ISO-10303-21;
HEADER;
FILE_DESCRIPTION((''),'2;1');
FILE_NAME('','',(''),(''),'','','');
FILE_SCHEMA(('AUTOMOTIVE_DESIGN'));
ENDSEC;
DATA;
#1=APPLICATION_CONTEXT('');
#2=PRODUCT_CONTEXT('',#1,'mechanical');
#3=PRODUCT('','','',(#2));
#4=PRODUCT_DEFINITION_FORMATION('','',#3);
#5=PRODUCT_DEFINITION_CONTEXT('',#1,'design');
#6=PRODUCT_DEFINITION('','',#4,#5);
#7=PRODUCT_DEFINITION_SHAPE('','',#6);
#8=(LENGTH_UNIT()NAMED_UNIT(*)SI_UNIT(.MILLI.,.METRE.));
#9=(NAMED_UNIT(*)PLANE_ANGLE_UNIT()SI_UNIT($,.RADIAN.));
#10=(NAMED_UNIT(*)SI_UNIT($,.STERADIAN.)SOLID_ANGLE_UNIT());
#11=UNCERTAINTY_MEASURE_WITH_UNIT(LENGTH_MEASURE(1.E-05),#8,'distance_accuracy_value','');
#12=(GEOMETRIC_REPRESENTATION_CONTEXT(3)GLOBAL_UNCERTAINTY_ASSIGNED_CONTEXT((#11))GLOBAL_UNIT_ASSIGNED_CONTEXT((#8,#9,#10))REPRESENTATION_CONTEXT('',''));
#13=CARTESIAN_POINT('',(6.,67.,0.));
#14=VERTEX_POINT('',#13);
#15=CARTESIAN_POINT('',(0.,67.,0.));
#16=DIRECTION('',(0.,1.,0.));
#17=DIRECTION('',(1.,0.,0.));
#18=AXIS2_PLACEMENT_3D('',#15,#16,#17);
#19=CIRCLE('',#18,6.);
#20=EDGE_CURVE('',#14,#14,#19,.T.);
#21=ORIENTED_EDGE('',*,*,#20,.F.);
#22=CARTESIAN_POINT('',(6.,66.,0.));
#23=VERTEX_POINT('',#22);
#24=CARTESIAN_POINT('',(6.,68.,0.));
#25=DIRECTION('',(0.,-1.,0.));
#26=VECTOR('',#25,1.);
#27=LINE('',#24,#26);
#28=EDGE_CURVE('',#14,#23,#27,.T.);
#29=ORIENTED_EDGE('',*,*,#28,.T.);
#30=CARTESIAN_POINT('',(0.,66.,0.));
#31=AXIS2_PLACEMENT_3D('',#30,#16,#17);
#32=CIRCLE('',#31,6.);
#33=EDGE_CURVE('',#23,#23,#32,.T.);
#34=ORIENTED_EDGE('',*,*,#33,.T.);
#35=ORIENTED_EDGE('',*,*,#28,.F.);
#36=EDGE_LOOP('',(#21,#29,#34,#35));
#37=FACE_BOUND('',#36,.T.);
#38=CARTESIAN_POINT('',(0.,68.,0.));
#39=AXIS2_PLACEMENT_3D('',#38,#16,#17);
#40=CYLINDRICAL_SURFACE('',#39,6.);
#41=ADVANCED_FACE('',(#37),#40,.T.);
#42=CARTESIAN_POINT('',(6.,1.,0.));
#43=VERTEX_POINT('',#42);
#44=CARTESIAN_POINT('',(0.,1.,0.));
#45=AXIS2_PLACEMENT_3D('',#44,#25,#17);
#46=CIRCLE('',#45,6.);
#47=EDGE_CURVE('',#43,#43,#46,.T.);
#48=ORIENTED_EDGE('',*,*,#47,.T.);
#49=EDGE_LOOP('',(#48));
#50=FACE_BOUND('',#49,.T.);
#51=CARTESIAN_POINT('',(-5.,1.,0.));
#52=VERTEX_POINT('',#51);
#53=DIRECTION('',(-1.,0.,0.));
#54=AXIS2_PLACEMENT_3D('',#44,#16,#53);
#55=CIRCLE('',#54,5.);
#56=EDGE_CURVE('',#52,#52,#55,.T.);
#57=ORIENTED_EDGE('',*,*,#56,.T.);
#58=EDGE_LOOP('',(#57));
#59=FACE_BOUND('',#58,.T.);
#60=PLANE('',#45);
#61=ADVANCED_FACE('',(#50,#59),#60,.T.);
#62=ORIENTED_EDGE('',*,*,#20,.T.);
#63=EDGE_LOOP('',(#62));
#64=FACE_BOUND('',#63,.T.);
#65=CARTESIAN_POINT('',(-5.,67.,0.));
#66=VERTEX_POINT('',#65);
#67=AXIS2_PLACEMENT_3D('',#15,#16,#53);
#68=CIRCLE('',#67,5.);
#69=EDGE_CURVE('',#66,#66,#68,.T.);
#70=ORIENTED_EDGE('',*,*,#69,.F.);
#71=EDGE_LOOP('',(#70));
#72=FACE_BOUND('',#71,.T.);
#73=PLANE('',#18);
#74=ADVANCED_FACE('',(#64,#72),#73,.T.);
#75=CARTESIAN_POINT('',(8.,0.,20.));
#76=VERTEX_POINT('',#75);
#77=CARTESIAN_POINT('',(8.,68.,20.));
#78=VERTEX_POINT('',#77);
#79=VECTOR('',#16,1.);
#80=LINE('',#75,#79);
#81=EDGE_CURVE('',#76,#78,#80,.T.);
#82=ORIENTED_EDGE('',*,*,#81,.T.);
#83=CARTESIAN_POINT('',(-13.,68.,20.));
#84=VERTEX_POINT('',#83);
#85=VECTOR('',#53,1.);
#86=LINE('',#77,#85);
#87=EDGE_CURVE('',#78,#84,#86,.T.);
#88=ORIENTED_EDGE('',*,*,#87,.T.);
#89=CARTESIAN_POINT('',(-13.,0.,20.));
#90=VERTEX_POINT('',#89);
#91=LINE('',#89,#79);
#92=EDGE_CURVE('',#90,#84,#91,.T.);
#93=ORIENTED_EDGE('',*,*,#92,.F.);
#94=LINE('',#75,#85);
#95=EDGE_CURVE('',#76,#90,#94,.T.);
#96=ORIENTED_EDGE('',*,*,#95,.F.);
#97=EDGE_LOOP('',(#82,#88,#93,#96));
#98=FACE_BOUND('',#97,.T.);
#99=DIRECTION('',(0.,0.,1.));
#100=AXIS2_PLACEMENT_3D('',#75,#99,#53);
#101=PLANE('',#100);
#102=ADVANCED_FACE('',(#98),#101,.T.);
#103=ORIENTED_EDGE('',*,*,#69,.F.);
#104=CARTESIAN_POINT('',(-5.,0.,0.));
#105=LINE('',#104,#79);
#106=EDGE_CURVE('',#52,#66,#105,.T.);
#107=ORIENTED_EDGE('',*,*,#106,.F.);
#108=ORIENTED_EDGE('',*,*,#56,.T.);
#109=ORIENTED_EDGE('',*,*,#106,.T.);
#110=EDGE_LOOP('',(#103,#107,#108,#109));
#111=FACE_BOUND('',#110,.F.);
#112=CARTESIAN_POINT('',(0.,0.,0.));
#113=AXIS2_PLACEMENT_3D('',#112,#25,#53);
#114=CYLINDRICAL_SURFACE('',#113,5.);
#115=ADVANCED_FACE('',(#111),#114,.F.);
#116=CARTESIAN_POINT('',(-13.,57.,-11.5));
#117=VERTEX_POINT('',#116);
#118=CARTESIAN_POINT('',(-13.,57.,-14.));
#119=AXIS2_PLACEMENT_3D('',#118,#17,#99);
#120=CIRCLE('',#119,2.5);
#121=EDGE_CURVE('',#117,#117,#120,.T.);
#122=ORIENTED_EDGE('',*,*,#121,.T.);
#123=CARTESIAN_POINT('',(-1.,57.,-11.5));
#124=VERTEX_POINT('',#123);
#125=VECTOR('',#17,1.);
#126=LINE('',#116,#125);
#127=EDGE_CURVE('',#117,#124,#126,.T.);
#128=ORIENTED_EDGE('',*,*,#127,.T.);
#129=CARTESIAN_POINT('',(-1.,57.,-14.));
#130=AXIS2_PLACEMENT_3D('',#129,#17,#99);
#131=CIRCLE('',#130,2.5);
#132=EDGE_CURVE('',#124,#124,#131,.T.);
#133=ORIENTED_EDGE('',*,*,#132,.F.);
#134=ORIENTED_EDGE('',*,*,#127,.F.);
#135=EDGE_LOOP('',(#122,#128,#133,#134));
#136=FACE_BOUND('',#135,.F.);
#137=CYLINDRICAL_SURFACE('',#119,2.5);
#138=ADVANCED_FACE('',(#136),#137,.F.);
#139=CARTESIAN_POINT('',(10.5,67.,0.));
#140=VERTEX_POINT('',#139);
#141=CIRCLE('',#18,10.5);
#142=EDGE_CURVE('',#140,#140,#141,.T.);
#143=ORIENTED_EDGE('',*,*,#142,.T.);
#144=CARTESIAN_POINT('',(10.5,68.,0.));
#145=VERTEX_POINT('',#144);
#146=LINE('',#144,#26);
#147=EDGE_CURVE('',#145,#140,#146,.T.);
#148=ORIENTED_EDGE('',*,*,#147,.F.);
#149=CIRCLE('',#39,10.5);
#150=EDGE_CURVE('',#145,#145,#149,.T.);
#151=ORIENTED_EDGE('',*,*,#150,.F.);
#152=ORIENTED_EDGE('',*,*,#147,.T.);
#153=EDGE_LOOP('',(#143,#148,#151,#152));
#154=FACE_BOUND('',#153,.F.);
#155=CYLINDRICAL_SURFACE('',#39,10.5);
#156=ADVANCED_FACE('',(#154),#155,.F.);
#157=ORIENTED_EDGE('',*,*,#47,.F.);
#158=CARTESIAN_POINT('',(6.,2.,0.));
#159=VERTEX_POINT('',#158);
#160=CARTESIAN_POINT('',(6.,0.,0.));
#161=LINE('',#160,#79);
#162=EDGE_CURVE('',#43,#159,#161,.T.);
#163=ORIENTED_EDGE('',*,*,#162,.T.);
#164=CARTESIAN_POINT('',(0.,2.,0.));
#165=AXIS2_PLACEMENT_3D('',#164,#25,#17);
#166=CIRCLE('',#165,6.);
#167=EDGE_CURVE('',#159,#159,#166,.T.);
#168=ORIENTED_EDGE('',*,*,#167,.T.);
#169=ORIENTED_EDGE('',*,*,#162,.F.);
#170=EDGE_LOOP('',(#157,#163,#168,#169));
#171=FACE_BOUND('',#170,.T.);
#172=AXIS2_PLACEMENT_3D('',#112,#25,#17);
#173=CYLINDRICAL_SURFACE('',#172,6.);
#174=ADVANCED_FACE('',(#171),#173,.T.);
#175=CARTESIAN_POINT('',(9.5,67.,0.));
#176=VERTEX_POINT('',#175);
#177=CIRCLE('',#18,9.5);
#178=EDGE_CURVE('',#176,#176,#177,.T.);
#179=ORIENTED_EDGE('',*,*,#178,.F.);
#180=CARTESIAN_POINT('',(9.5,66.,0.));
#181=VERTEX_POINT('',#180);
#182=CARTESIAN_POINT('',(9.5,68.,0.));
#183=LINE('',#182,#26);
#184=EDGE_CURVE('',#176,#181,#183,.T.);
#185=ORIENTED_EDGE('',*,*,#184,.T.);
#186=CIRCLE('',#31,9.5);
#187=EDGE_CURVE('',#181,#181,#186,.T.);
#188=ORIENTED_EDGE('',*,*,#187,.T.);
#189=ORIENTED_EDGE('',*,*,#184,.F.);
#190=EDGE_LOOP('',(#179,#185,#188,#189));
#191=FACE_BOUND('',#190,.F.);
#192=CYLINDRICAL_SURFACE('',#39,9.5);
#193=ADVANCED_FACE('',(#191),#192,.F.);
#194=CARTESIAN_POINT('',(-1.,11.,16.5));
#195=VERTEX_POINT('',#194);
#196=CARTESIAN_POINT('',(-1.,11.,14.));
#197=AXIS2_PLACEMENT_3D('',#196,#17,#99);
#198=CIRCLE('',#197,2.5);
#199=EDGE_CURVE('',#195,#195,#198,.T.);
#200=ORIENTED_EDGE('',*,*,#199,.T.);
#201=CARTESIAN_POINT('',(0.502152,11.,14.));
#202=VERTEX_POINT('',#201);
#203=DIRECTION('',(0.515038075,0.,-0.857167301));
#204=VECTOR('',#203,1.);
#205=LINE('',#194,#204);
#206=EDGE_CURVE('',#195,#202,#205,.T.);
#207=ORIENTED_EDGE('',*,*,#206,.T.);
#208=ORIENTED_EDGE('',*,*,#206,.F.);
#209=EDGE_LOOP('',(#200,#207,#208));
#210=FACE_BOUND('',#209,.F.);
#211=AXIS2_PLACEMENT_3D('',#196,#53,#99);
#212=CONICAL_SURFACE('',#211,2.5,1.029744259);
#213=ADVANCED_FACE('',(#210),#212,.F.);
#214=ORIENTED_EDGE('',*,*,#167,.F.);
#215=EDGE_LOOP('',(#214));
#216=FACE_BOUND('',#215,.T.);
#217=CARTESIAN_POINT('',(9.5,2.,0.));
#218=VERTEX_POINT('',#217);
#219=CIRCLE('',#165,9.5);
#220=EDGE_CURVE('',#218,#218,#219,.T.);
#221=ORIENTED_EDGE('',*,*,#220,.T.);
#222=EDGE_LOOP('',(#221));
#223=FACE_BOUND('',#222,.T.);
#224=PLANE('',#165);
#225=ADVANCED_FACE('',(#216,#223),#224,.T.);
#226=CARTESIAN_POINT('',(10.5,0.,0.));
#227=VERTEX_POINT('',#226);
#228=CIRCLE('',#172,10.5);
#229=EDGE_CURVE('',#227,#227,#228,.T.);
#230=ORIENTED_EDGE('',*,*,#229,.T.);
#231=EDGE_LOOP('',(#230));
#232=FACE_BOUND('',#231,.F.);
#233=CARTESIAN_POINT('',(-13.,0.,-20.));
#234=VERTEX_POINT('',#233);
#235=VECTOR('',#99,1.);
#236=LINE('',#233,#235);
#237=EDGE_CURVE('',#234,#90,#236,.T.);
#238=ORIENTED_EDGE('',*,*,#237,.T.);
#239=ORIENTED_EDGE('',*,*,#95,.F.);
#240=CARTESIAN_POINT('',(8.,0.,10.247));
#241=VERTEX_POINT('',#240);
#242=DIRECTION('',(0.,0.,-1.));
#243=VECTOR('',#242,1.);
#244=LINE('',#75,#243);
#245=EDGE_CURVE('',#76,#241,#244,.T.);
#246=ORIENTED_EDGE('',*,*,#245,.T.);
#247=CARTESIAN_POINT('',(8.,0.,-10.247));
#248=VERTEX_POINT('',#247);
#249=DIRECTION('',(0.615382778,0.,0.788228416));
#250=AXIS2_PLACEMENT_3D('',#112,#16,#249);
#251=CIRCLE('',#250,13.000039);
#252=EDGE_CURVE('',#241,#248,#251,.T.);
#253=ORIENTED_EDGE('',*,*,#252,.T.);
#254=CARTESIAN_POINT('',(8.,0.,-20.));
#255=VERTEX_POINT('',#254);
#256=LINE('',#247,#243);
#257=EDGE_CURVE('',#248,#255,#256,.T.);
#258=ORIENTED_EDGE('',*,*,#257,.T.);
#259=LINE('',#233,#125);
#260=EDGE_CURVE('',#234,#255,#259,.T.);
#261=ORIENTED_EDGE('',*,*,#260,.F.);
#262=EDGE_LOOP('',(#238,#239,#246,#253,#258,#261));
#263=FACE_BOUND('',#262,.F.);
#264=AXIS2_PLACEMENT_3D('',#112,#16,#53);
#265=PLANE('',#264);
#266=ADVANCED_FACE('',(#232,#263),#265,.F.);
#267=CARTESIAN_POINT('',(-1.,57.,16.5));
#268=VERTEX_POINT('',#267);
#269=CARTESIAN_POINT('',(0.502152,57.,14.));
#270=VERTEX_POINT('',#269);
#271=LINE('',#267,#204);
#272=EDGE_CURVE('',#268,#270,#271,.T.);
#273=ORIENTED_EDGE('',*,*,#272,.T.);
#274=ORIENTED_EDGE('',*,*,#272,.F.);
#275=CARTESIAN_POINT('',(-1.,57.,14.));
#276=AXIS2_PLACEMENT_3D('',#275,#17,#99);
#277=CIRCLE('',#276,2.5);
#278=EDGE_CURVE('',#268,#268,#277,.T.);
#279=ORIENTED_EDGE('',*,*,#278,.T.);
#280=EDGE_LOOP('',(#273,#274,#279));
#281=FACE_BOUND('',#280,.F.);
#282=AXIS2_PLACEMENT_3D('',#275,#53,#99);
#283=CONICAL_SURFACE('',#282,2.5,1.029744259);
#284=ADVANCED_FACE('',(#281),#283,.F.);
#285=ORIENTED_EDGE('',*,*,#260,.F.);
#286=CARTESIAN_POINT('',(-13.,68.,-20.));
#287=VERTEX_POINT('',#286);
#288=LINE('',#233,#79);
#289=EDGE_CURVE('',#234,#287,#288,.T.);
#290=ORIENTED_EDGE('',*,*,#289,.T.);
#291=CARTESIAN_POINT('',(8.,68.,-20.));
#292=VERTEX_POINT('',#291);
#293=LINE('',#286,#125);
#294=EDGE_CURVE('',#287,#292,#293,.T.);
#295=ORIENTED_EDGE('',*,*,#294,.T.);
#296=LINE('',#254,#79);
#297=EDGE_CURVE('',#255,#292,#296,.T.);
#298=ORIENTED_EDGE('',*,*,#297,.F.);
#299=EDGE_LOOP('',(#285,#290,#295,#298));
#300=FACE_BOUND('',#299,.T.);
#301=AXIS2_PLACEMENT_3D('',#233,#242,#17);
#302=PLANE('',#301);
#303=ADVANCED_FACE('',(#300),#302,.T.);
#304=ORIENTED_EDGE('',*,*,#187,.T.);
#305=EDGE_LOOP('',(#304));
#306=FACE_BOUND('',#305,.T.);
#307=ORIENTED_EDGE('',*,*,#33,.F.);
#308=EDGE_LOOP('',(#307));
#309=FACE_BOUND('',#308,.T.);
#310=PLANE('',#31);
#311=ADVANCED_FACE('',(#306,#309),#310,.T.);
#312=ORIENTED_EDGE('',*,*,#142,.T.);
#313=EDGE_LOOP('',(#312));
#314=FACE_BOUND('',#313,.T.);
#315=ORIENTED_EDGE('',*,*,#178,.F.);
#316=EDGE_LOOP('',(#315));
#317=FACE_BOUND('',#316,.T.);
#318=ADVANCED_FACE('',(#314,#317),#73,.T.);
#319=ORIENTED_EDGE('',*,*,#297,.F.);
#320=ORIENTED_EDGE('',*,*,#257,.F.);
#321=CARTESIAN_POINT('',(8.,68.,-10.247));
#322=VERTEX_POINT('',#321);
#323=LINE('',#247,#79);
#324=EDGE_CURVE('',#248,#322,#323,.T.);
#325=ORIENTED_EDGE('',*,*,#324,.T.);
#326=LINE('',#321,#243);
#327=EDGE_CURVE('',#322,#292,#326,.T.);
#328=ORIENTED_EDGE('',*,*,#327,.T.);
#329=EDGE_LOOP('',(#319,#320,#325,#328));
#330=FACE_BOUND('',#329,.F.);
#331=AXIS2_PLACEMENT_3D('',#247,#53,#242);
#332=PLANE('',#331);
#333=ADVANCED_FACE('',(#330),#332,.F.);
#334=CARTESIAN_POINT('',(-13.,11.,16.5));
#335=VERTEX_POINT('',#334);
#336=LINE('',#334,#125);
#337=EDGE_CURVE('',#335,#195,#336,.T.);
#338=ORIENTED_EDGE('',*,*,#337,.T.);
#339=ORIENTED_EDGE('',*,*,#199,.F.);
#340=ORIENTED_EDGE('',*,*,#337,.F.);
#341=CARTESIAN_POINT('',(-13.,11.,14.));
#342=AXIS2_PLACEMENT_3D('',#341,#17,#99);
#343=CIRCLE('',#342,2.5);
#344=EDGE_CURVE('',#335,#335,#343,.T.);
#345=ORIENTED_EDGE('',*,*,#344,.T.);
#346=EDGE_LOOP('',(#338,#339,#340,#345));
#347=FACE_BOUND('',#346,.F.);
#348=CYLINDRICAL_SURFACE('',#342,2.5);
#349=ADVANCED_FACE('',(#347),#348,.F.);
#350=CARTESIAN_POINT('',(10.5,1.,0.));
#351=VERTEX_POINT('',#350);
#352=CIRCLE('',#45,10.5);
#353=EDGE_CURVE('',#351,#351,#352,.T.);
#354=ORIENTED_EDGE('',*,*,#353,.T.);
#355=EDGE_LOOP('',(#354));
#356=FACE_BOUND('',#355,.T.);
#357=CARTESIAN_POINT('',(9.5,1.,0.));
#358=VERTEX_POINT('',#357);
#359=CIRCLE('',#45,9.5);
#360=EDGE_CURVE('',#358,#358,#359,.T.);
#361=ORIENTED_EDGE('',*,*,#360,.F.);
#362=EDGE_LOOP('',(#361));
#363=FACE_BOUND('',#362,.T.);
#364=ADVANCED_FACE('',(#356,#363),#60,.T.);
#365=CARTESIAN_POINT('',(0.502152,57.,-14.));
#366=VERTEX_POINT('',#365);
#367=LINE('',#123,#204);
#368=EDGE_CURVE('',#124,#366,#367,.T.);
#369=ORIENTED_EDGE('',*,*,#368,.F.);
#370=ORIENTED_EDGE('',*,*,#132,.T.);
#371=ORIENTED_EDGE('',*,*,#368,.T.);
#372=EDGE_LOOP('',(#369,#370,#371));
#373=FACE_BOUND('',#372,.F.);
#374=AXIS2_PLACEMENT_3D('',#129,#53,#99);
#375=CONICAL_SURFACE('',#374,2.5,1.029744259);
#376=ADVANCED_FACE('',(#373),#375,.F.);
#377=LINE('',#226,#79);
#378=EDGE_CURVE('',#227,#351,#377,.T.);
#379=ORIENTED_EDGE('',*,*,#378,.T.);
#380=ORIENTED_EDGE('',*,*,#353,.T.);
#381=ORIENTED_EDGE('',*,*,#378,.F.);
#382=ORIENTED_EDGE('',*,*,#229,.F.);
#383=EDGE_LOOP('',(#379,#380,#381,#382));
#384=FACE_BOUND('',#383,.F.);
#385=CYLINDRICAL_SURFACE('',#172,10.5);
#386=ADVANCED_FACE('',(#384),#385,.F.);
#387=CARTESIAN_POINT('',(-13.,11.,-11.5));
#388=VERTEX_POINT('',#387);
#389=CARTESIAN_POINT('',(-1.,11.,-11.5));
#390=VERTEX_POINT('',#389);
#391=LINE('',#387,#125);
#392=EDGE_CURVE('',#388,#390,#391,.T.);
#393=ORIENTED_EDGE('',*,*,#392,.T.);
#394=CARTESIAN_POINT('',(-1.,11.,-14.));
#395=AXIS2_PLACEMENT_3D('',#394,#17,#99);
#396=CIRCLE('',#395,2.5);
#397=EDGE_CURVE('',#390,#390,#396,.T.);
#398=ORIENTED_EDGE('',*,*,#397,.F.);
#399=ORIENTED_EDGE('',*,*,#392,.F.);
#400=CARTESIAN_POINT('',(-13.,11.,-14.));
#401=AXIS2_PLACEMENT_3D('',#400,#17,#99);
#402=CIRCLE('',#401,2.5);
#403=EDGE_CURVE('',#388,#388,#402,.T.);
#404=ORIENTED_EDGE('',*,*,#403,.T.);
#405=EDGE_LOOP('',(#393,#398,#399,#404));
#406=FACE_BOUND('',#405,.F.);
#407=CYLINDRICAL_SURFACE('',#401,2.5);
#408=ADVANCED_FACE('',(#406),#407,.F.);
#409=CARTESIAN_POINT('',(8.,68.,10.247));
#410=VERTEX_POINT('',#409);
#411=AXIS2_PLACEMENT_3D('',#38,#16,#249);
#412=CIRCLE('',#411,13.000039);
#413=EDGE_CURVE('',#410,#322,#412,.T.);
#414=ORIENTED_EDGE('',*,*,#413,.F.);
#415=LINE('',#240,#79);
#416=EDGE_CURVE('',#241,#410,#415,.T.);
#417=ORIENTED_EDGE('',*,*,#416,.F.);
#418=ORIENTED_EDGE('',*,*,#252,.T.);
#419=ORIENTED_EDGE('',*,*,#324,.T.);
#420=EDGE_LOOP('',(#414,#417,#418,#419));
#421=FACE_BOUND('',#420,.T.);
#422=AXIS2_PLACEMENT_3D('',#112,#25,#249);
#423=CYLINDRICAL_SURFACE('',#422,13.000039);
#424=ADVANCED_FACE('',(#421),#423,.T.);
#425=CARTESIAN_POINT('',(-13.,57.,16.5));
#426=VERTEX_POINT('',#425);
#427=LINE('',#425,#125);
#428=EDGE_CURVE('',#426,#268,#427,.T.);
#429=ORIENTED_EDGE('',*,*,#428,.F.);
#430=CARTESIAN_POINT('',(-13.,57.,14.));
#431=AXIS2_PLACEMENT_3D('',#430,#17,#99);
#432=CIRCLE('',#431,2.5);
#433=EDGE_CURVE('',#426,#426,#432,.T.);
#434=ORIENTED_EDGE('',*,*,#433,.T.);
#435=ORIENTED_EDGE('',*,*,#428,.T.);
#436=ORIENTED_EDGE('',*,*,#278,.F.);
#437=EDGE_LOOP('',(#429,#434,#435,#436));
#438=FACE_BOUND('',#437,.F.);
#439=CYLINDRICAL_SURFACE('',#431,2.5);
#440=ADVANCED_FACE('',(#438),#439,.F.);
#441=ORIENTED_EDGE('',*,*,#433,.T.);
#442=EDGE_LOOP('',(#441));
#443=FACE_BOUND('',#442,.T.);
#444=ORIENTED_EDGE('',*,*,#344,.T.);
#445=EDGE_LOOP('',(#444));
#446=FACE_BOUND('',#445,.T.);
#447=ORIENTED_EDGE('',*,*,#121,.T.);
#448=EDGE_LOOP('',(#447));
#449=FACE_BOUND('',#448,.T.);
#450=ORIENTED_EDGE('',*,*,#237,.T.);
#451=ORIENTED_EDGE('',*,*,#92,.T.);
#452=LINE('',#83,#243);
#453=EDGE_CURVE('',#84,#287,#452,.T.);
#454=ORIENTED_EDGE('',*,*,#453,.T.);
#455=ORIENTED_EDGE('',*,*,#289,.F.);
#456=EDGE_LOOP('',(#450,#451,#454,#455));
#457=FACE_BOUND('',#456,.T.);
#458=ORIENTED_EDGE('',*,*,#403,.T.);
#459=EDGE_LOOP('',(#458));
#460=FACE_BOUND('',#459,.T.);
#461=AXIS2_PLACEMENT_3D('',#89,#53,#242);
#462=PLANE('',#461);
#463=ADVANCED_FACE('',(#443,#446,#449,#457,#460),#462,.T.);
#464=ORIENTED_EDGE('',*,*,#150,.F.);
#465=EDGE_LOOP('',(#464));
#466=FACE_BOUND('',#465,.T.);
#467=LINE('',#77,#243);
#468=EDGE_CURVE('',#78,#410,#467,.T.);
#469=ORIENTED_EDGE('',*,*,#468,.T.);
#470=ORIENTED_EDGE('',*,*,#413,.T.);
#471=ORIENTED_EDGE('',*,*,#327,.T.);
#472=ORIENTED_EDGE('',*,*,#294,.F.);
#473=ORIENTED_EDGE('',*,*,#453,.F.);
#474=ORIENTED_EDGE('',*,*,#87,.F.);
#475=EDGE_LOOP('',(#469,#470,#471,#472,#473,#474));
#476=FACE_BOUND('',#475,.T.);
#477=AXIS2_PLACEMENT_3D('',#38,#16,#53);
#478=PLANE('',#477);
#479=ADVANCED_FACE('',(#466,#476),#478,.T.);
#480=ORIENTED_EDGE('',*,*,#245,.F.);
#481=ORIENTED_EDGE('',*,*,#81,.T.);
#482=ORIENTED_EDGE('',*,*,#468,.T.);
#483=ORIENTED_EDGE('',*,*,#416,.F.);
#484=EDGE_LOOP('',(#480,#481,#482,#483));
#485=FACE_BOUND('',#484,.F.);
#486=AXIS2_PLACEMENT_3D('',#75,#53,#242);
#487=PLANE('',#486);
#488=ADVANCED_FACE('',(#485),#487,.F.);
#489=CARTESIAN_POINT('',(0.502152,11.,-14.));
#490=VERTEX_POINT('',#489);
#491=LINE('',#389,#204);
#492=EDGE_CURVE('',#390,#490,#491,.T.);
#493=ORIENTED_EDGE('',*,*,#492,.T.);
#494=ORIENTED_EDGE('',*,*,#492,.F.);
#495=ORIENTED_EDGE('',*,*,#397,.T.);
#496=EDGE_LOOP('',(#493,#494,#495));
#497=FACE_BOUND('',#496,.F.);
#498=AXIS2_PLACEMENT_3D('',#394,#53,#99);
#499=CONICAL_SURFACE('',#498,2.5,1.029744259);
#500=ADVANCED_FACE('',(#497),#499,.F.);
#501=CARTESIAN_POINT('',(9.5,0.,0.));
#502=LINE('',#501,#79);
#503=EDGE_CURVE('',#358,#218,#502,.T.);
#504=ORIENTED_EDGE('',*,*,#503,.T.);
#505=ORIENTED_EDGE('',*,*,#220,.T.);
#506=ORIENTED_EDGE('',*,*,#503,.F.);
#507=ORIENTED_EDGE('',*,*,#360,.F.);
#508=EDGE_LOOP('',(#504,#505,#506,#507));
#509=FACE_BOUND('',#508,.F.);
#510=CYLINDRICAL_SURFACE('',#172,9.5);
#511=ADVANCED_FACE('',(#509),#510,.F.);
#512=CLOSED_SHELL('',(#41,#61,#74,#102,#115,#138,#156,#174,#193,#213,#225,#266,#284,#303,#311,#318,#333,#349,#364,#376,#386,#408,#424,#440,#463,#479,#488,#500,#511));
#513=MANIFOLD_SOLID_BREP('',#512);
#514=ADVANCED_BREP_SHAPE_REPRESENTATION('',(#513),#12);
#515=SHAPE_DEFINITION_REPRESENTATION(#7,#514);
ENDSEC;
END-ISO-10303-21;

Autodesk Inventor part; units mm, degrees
ref_plane "YZ Plane" through (0, 0, 0) normal (1, 0, 0) x (0, 1, 0)
ref_plane "XZ Plane" through (0, 0, 0) normal (0, 1, 0) x (-1, 0, 0)
ref_plane "XY Plane" through (0, 0, 0) normal (0, 0, 1) x (1, 0, 0)
sketch "Szkic1" plane through (0, 0, 0) normal (0, 1, 0) x (-1, 0, 0)
  line L0 (-8, 20) -> (13, 20)
  line L1 (13, 20) -> (13, -20)
  line L2 (13, -20) -> (-8, -20)
  line L3 (-13, 20) -> (13, -20) construction
  line L4 (13, 20) -> (-13, -20) construction
  line L5 (13, 0) -> (0, 0)
  circle A0 centre (0, 0) radius 5
  line L6 (13, 20) -> (-8, 20)
  arc A1 (-8, 10.247) -> (-8, -10.247) centre (0, 0) ccw
  line L7 (-8, 20) -> (-8, 10.247)
  line L8 (-8, -10.247) -> (-8, -20)
  dimension "d0" = 26
  dimension "d1" = 40
  dimension "d2" = 10
  dimension "d3" = 21
extrude "Wyciągnięcie proste1" add sketch "Szkic1" along normal blind 68
sketch "Szkic2" plane through (0, 68, 0) normal (0, 1, 0) x (1, 0, 0)
  circle A0 centre (0, 0) radius 5 projected
  circle A1 centre (0, 0) radius 6
  circle A2 centre (0, 0) radius 10.5
  circle A3 centre (0, 0) radius 9.5
  dimension "d6" = 12
  dimension "d7" = 21
  dimension "d8" = 19
extrude "Wyciągnięcie proste2" cut sketch "Szkic2" against normal blind 1
sketch "Szkic3" plane through (0, 68, 0) normal (0, 1, 0) x (1, 0, 0)
  circle A0 centre (0, 0) radius 6 projected
  circle A1 centre (0, 0) radius 9.5 projected
extrude "Wyciągnięcie proste3" cut sketch "Szkic3" against normal blind 2
sketch "Szkic4" plane through (0, 0, 0) normal (0, -1, 0) x (1, 0, 0)
  circle A0 centre (0, 0) radius 5
  circle A1 centre (0, 0) radius 6
  circle A2 centre (0, 0) radius 10.5
  circle A3 centre (0, 0) radius 9.5
  dimension "d13" = 12
  dimension "d14" = 21
  dimension "d15" = 19
extrude "Wyciągnięcie proste4" cut sketch "Szkic4" against normal blind 1
sketch "Szkic5" plane through (0, 0, 0) normal (0, -1, 0) x (1, 0, 0)
  circle A0 centre (0, 0) radius 6 projected
  circle A1 centre (0, 0) radius 9.5 projected
extrude "Wyciągnięcie proste5" cut sketch "Szkic5" against normal blind 2
sketch "Szkic6" plane through (-13, 0, -20) normal (-1, 0, 0) x (0, 0, 1)
  line L0 (0, 0) -> (40, 0) projected
  line L1 (40, 0) -> (40, 68) projected
  line L2 (0, 68) -> (40, 68) projected
  line L3 (0, 0) -> (0, 68) projected
  line L4 (0, 68) -> (20, 68)
  line L5 (20, 68) -> (6, 68)
  line L6 (20, 68) -> (34, 68)
  line L7 (34, 68) -> (34, 0)
  line L8 (0, 0) -> (40, 0) projected
  line L9 (6, 68) -> (6, 0)
  line L10 (34, 68) -> (34, 34)
  line L11 (34, 34) -> (6, 34)
  line L12 (34, 34) -> (34, 57)
  line L13 (34, 57) -> (6, 57)
  line L14 (6, 34) -> (6, 11)
  line L15 (6, 11) -> (34, 11)
  point P0 (20, 0)
  dimension "d20" = 20
  dimension "d21" = 14
  dimension "d22" = 14
  dimension "d23" = 34
  dimension "d24" = 23
  dimension "d25" = 23
hole "Otwór1" at (-13, 57, -14) at (-13, 57, 14) at (-13, 11, -14) at (-13, 11, 14) direction (1, 0, 0) diameter 5 depth 12 tip angle 118
thread "Gwint1" size "M5x0.8" class "6H" standard "ANSI Metric M Profile" full length
thread "Gwint2" size "M5x0.8" class "6H" standard "ANSI Metric M Profile" full length
thread "Gwint3" size "M5x0.8" class "6H" standard "ANSI Metric M Profile" full length
thread "Gwint4" size "M5x0.8" class "6H" standard "ANSI Metric M Profile" full length
properties part number "Łożysko liniowe w obudowie SMAG10UU-L"
